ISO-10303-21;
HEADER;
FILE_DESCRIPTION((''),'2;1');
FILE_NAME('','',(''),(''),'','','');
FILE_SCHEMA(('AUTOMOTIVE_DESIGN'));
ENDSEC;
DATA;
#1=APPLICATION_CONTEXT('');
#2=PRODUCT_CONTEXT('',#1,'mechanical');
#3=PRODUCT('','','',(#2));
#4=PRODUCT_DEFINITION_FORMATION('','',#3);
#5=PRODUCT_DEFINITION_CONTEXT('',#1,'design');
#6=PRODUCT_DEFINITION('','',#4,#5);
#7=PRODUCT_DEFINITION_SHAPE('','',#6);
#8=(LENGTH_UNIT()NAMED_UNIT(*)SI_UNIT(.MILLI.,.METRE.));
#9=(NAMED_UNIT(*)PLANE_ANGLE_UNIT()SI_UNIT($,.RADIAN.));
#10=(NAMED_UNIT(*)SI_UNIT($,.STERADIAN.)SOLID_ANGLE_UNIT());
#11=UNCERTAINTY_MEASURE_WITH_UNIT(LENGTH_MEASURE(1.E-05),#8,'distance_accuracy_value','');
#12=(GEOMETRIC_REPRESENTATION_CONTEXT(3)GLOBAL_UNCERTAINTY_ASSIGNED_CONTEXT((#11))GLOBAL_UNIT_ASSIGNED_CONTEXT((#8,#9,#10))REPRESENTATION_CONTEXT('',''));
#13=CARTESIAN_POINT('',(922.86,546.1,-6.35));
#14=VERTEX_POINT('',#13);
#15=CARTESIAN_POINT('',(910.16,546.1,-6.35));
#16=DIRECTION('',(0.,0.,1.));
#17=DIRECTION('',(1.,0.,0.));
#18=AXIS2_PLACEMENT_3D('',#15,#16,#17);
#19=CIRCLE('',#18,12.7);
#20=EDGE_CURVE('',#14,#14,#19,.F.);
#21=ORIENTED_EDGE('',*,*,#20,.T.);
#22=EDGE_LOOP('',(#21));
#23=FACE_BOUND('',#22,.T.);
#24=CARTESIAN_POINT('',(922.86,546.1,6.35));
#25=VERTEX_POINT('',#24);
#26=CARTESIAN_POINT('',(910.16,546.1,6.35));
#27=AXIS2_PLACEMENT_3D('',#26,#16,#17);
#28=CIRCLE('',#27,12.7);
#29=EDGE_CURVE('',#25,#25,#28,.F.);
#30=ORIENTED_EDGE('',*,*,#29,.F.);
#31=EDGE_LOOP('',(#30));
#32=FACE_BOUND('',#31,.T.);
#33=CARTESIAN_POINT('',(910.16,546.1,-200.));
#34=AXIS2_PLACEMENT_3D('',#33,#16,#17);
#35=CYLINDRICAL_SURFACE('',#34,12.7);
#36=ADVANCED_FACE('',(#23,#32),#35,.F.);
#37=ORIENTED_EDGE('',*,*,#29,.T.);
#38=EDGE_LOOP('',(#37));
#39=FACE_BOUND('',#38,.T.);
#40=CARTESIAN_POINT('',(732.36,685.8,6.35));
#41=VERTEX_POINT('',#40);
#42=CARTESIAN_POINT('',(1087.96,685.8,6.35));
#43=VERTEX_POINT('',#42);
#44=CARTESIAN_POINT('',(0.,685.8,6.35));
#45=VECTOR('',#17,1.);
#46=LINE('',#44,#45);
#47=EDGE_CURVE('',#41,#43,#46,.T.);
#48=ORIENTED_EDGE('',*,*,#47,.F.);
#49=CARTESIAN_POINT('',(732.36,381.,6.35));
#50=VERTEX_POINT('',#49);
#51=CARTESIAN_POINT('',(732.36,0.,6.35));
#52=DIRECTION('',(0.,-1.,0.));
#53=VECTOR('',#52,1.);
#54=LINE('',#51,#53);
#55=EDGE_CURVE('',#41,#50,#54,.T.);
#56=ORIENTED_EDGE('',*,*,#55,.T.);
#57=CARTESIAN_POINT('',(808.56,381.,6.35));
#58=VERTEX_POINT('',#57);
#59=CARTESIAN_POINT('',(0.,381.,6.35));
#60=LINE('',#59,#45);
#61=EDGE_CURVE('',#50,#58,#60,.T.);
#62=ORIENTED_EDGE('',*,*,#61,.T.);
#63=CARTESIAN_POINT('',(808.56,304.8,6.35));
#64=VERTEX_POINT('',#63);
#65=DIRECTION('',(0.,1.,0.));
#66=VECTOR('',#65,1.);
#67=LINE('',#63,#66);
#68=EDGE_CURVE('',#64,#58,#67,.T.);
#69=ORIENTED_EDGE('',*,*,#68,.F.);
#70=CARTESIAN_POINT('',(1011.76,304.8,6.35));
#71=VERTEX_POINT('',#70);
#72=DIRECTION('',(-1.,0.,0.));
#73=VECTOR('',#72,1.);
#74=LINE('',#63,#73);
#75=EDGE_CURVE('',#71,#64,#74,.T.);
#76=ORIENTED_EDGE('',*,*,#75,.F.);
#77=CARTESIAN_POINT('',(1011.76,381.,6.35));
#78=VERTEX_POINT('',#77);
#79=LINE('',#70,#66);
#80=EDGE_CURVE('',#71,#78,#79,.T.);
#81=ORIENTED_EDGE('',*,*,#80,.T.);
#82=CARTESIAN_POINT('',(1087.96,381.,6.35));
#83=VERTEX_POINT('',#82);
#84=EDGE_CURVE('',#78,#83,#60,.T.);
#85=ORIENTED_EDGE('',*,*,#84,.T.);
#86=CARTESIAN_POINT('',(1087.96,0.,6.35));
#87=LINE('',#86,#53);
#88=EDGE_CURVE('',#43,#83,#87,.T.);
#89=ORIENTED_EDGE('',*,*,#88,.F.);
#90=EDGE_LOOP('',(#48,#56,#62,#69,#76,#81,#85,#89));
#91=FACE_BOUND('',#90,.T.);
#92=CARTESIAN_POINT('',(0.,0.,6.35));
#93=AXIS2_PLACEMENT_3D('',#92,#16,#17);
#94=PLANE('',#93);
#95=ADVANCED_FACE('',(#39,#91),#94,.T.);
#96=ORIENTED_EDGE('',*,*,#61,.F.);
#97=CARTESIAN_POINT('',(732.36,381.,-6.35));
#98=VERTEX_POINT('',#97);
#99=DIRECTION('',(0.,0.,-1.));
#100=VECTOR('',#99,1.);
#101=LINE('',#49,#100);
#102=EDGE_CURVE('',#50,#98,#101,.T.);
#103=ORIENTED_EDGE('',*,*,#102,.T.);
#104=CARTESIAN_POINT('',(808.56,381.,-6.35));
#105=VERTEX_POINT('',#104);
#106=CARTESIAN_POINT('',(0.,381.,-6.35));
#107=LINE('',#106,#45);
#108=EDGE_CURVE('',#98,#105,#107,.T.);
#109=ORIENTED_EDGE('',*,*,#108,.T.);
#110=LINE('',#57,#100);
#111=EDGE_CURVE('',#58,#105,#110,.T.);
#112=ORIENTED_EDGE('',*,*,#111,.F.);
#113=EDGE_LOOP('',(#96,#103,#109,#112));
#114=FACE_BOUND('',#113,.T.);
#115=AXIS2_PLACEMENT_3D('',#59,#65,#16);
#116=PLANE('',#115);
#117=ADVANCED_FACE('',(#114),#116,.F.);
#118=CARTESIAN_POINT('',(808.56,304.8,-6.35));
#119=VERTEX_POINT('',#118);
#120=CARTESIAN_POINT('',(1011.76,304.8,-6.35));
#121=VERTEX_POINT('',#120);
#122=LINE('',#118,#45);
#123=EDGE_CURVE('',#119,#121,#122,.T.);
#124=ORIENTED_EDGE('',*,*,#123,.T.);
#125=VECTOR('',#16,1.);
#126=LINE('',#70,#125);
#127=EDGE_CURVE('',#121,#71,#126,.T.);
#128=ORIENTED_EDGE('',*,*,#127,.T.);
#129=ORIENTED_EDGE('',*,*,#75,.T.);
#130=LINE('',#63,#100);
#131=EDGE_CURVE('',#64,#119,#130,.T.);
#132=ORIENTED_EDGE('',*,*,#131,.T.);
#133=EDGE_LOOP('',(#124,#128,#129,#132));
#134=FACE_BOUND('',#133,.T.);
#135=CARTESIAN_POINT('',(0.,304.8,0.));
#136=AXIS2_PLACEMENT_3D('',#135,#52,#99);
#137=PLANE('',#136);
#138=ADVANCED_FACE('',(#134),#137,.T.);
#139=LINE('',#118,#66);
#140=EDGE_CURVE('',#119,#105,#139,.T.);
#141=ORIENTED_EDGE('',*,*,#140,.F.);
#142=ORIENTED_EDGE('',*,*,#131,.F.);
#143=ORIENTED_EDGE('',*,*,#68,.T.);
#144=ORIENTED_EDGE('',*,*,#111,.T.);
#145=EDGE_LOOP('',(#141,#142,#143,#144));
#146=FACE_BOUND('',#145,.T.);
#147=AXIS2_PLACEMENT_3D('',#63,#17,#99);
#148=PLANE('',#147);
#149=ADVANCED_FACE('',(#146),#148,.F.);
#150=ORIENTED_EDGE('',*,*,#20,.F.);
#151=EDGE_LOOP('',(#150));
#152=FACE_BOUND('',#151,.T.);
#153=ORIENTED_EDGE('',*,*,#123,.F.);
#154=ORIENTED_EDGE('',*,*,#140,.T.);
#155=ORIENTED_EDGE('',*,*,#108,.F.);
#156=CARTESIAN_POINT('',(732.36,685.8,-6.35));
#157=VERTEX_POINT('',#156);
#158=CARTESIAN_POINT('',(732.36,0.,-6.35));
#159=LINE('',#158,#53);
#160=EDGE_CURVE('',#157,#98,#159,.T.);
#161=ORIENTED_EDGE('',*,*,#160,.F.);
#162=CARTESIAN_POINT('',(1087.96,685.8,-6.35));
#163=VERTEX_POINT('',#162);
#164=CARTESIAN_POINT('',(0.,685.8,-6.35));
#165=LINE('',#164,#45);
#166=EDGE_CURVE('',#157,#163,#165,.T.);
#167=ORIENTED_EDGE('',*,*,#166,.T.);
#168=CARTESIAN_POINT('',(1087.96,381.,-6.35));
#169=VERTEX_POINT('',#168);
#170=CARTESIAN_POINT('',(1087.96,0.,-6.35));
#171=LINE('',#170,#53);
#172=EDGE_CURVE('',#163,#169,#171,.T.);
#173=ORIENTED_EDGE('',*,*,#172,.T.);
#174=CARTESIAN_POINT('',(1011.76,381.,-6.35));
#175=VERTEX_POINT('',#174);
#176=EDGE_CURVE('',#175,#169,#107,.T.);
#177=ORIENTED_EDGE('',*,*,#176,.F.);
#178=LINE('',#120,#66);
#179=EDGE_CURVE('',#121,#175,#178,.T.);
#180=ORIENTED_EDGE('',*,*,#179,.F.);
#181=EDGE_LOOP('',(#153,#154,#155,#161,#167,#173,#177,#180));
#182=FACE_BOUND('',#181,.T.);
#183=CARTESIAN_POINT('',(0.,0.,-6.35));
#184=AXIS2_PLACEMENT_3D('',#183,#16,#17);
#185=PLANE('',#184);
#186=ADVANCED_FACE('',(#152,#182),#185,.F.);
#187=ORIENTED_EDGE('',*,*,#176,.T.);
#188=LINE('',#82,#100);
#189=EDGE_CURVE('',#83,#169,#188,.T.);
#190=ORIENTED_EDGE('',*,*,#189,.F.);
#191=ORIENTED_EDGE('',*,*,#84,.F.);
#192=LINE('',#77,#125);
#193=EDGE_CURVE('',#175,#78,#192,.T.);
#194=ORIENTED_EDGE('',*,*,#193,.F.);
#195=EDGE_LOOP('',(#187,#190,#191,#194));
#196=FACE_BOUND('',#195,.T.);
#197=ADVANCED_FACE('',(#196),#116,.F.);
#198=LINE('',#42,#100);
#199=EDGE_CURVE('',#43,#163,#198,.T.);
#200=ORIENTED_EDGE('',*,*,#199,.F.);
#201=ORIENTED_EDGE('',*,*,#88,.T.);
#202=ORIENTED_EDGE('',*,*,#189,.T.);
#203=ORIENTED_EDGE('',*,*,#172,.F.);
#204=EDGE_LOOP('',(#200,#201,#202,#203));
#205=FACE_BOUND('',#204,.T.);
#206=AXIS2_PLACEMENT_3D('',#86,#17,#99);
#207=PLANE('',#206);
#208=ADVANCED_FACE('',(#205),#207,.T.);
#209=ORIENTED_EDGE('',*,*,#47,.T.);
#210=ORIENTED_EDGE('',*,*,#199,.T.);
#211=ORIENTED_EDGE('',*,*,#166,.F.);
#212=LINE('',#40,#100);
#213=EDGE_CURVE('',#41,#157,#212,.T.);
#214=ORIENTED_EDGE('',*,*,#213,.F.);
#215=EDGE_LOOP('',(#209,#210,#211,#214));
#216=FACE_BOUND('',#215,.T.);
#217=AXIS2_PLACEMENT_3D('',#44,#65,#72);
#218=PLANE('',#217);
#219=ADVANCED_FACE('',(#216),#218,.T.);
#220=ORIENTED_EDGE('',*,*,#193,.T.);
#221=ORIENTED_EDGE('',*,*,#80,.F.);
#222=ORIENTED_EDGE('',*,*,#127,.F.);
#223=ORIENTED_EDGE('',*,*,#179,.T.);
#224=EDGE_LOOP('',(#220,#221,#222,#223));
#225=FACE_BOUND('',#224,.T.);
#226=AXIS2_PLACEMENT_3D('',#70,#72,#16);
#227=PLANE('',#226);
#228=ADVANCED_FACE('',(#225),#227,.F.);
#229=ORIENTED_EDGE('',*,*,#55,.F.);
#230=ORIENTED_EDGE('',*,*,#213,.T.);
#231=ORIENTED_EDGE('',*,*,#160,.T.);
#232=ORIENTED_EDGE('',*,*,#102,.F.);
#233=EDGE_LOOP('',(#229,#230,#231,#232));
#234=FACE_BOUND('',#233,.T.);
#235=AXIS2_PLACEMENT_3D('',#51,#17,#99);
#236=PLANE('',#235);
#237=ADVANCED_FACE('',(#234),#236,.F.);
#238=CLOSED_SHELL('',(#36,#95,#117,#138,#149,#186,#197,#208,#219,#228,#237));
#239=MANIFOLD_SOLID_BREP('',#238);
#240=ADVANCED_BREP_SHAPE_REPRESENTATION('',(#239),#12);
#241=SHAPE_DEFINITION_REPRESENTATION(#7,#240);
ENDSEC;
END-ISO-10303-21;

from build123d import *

# Parameters (mm, degrees)
BOSS_EXTRUDE1_DEPTH = 6.35
SKETCH3_W           = 203.2
SKETCH3_H           = 12.7
BOSS_EXTRUDE2_DEPTH = 76.2
CAVITY1_START       = -6.35
CAVITY1_OUTLINE_R   = 12.7
CAVITY1_DEPTH       = 12.7


# Read off the part's stored shape, not the designer's step: Cavity1
with BuildPart() as part:
    # Sketch1 → Boss-Extrude1 (new, symmetric)
    with BuildSketch(Plane.XY):
        Polygon((732.36, 381), (785.7, 381), (1001.6, 381), (1087.96, 381), (1087.96, 685.8), (1001.6, 685.8), (785.7, 685.8), (732.36, 685.8), align=None)
    extrude(amount=BOSS_EXTRUDE1_DEPTH, both=True)

    # Sketch3 → Boss-Extrude2 (add)
    with BuildSketch(Plane.XZ.offset(-381)):
        with Locations((910.16, 0)):
            Rectangle(SKETCH3_W, SKETCH3_H)
    extrude(amount=BOSS_EXTRUDE2_DEPTH)

    # Cavity1 outline → Cavity1 (cut)
    with BuildSketch(Plane.XY.offset(CAVITY1_START)):
        with Locations((910.16, 546.1)):
            Circle(CAVITY1_OUTLINE_R)
    extrude(amount=CAVITY1_DEPTH, mode=Mode.SUBTRACT)


solid = part.part
